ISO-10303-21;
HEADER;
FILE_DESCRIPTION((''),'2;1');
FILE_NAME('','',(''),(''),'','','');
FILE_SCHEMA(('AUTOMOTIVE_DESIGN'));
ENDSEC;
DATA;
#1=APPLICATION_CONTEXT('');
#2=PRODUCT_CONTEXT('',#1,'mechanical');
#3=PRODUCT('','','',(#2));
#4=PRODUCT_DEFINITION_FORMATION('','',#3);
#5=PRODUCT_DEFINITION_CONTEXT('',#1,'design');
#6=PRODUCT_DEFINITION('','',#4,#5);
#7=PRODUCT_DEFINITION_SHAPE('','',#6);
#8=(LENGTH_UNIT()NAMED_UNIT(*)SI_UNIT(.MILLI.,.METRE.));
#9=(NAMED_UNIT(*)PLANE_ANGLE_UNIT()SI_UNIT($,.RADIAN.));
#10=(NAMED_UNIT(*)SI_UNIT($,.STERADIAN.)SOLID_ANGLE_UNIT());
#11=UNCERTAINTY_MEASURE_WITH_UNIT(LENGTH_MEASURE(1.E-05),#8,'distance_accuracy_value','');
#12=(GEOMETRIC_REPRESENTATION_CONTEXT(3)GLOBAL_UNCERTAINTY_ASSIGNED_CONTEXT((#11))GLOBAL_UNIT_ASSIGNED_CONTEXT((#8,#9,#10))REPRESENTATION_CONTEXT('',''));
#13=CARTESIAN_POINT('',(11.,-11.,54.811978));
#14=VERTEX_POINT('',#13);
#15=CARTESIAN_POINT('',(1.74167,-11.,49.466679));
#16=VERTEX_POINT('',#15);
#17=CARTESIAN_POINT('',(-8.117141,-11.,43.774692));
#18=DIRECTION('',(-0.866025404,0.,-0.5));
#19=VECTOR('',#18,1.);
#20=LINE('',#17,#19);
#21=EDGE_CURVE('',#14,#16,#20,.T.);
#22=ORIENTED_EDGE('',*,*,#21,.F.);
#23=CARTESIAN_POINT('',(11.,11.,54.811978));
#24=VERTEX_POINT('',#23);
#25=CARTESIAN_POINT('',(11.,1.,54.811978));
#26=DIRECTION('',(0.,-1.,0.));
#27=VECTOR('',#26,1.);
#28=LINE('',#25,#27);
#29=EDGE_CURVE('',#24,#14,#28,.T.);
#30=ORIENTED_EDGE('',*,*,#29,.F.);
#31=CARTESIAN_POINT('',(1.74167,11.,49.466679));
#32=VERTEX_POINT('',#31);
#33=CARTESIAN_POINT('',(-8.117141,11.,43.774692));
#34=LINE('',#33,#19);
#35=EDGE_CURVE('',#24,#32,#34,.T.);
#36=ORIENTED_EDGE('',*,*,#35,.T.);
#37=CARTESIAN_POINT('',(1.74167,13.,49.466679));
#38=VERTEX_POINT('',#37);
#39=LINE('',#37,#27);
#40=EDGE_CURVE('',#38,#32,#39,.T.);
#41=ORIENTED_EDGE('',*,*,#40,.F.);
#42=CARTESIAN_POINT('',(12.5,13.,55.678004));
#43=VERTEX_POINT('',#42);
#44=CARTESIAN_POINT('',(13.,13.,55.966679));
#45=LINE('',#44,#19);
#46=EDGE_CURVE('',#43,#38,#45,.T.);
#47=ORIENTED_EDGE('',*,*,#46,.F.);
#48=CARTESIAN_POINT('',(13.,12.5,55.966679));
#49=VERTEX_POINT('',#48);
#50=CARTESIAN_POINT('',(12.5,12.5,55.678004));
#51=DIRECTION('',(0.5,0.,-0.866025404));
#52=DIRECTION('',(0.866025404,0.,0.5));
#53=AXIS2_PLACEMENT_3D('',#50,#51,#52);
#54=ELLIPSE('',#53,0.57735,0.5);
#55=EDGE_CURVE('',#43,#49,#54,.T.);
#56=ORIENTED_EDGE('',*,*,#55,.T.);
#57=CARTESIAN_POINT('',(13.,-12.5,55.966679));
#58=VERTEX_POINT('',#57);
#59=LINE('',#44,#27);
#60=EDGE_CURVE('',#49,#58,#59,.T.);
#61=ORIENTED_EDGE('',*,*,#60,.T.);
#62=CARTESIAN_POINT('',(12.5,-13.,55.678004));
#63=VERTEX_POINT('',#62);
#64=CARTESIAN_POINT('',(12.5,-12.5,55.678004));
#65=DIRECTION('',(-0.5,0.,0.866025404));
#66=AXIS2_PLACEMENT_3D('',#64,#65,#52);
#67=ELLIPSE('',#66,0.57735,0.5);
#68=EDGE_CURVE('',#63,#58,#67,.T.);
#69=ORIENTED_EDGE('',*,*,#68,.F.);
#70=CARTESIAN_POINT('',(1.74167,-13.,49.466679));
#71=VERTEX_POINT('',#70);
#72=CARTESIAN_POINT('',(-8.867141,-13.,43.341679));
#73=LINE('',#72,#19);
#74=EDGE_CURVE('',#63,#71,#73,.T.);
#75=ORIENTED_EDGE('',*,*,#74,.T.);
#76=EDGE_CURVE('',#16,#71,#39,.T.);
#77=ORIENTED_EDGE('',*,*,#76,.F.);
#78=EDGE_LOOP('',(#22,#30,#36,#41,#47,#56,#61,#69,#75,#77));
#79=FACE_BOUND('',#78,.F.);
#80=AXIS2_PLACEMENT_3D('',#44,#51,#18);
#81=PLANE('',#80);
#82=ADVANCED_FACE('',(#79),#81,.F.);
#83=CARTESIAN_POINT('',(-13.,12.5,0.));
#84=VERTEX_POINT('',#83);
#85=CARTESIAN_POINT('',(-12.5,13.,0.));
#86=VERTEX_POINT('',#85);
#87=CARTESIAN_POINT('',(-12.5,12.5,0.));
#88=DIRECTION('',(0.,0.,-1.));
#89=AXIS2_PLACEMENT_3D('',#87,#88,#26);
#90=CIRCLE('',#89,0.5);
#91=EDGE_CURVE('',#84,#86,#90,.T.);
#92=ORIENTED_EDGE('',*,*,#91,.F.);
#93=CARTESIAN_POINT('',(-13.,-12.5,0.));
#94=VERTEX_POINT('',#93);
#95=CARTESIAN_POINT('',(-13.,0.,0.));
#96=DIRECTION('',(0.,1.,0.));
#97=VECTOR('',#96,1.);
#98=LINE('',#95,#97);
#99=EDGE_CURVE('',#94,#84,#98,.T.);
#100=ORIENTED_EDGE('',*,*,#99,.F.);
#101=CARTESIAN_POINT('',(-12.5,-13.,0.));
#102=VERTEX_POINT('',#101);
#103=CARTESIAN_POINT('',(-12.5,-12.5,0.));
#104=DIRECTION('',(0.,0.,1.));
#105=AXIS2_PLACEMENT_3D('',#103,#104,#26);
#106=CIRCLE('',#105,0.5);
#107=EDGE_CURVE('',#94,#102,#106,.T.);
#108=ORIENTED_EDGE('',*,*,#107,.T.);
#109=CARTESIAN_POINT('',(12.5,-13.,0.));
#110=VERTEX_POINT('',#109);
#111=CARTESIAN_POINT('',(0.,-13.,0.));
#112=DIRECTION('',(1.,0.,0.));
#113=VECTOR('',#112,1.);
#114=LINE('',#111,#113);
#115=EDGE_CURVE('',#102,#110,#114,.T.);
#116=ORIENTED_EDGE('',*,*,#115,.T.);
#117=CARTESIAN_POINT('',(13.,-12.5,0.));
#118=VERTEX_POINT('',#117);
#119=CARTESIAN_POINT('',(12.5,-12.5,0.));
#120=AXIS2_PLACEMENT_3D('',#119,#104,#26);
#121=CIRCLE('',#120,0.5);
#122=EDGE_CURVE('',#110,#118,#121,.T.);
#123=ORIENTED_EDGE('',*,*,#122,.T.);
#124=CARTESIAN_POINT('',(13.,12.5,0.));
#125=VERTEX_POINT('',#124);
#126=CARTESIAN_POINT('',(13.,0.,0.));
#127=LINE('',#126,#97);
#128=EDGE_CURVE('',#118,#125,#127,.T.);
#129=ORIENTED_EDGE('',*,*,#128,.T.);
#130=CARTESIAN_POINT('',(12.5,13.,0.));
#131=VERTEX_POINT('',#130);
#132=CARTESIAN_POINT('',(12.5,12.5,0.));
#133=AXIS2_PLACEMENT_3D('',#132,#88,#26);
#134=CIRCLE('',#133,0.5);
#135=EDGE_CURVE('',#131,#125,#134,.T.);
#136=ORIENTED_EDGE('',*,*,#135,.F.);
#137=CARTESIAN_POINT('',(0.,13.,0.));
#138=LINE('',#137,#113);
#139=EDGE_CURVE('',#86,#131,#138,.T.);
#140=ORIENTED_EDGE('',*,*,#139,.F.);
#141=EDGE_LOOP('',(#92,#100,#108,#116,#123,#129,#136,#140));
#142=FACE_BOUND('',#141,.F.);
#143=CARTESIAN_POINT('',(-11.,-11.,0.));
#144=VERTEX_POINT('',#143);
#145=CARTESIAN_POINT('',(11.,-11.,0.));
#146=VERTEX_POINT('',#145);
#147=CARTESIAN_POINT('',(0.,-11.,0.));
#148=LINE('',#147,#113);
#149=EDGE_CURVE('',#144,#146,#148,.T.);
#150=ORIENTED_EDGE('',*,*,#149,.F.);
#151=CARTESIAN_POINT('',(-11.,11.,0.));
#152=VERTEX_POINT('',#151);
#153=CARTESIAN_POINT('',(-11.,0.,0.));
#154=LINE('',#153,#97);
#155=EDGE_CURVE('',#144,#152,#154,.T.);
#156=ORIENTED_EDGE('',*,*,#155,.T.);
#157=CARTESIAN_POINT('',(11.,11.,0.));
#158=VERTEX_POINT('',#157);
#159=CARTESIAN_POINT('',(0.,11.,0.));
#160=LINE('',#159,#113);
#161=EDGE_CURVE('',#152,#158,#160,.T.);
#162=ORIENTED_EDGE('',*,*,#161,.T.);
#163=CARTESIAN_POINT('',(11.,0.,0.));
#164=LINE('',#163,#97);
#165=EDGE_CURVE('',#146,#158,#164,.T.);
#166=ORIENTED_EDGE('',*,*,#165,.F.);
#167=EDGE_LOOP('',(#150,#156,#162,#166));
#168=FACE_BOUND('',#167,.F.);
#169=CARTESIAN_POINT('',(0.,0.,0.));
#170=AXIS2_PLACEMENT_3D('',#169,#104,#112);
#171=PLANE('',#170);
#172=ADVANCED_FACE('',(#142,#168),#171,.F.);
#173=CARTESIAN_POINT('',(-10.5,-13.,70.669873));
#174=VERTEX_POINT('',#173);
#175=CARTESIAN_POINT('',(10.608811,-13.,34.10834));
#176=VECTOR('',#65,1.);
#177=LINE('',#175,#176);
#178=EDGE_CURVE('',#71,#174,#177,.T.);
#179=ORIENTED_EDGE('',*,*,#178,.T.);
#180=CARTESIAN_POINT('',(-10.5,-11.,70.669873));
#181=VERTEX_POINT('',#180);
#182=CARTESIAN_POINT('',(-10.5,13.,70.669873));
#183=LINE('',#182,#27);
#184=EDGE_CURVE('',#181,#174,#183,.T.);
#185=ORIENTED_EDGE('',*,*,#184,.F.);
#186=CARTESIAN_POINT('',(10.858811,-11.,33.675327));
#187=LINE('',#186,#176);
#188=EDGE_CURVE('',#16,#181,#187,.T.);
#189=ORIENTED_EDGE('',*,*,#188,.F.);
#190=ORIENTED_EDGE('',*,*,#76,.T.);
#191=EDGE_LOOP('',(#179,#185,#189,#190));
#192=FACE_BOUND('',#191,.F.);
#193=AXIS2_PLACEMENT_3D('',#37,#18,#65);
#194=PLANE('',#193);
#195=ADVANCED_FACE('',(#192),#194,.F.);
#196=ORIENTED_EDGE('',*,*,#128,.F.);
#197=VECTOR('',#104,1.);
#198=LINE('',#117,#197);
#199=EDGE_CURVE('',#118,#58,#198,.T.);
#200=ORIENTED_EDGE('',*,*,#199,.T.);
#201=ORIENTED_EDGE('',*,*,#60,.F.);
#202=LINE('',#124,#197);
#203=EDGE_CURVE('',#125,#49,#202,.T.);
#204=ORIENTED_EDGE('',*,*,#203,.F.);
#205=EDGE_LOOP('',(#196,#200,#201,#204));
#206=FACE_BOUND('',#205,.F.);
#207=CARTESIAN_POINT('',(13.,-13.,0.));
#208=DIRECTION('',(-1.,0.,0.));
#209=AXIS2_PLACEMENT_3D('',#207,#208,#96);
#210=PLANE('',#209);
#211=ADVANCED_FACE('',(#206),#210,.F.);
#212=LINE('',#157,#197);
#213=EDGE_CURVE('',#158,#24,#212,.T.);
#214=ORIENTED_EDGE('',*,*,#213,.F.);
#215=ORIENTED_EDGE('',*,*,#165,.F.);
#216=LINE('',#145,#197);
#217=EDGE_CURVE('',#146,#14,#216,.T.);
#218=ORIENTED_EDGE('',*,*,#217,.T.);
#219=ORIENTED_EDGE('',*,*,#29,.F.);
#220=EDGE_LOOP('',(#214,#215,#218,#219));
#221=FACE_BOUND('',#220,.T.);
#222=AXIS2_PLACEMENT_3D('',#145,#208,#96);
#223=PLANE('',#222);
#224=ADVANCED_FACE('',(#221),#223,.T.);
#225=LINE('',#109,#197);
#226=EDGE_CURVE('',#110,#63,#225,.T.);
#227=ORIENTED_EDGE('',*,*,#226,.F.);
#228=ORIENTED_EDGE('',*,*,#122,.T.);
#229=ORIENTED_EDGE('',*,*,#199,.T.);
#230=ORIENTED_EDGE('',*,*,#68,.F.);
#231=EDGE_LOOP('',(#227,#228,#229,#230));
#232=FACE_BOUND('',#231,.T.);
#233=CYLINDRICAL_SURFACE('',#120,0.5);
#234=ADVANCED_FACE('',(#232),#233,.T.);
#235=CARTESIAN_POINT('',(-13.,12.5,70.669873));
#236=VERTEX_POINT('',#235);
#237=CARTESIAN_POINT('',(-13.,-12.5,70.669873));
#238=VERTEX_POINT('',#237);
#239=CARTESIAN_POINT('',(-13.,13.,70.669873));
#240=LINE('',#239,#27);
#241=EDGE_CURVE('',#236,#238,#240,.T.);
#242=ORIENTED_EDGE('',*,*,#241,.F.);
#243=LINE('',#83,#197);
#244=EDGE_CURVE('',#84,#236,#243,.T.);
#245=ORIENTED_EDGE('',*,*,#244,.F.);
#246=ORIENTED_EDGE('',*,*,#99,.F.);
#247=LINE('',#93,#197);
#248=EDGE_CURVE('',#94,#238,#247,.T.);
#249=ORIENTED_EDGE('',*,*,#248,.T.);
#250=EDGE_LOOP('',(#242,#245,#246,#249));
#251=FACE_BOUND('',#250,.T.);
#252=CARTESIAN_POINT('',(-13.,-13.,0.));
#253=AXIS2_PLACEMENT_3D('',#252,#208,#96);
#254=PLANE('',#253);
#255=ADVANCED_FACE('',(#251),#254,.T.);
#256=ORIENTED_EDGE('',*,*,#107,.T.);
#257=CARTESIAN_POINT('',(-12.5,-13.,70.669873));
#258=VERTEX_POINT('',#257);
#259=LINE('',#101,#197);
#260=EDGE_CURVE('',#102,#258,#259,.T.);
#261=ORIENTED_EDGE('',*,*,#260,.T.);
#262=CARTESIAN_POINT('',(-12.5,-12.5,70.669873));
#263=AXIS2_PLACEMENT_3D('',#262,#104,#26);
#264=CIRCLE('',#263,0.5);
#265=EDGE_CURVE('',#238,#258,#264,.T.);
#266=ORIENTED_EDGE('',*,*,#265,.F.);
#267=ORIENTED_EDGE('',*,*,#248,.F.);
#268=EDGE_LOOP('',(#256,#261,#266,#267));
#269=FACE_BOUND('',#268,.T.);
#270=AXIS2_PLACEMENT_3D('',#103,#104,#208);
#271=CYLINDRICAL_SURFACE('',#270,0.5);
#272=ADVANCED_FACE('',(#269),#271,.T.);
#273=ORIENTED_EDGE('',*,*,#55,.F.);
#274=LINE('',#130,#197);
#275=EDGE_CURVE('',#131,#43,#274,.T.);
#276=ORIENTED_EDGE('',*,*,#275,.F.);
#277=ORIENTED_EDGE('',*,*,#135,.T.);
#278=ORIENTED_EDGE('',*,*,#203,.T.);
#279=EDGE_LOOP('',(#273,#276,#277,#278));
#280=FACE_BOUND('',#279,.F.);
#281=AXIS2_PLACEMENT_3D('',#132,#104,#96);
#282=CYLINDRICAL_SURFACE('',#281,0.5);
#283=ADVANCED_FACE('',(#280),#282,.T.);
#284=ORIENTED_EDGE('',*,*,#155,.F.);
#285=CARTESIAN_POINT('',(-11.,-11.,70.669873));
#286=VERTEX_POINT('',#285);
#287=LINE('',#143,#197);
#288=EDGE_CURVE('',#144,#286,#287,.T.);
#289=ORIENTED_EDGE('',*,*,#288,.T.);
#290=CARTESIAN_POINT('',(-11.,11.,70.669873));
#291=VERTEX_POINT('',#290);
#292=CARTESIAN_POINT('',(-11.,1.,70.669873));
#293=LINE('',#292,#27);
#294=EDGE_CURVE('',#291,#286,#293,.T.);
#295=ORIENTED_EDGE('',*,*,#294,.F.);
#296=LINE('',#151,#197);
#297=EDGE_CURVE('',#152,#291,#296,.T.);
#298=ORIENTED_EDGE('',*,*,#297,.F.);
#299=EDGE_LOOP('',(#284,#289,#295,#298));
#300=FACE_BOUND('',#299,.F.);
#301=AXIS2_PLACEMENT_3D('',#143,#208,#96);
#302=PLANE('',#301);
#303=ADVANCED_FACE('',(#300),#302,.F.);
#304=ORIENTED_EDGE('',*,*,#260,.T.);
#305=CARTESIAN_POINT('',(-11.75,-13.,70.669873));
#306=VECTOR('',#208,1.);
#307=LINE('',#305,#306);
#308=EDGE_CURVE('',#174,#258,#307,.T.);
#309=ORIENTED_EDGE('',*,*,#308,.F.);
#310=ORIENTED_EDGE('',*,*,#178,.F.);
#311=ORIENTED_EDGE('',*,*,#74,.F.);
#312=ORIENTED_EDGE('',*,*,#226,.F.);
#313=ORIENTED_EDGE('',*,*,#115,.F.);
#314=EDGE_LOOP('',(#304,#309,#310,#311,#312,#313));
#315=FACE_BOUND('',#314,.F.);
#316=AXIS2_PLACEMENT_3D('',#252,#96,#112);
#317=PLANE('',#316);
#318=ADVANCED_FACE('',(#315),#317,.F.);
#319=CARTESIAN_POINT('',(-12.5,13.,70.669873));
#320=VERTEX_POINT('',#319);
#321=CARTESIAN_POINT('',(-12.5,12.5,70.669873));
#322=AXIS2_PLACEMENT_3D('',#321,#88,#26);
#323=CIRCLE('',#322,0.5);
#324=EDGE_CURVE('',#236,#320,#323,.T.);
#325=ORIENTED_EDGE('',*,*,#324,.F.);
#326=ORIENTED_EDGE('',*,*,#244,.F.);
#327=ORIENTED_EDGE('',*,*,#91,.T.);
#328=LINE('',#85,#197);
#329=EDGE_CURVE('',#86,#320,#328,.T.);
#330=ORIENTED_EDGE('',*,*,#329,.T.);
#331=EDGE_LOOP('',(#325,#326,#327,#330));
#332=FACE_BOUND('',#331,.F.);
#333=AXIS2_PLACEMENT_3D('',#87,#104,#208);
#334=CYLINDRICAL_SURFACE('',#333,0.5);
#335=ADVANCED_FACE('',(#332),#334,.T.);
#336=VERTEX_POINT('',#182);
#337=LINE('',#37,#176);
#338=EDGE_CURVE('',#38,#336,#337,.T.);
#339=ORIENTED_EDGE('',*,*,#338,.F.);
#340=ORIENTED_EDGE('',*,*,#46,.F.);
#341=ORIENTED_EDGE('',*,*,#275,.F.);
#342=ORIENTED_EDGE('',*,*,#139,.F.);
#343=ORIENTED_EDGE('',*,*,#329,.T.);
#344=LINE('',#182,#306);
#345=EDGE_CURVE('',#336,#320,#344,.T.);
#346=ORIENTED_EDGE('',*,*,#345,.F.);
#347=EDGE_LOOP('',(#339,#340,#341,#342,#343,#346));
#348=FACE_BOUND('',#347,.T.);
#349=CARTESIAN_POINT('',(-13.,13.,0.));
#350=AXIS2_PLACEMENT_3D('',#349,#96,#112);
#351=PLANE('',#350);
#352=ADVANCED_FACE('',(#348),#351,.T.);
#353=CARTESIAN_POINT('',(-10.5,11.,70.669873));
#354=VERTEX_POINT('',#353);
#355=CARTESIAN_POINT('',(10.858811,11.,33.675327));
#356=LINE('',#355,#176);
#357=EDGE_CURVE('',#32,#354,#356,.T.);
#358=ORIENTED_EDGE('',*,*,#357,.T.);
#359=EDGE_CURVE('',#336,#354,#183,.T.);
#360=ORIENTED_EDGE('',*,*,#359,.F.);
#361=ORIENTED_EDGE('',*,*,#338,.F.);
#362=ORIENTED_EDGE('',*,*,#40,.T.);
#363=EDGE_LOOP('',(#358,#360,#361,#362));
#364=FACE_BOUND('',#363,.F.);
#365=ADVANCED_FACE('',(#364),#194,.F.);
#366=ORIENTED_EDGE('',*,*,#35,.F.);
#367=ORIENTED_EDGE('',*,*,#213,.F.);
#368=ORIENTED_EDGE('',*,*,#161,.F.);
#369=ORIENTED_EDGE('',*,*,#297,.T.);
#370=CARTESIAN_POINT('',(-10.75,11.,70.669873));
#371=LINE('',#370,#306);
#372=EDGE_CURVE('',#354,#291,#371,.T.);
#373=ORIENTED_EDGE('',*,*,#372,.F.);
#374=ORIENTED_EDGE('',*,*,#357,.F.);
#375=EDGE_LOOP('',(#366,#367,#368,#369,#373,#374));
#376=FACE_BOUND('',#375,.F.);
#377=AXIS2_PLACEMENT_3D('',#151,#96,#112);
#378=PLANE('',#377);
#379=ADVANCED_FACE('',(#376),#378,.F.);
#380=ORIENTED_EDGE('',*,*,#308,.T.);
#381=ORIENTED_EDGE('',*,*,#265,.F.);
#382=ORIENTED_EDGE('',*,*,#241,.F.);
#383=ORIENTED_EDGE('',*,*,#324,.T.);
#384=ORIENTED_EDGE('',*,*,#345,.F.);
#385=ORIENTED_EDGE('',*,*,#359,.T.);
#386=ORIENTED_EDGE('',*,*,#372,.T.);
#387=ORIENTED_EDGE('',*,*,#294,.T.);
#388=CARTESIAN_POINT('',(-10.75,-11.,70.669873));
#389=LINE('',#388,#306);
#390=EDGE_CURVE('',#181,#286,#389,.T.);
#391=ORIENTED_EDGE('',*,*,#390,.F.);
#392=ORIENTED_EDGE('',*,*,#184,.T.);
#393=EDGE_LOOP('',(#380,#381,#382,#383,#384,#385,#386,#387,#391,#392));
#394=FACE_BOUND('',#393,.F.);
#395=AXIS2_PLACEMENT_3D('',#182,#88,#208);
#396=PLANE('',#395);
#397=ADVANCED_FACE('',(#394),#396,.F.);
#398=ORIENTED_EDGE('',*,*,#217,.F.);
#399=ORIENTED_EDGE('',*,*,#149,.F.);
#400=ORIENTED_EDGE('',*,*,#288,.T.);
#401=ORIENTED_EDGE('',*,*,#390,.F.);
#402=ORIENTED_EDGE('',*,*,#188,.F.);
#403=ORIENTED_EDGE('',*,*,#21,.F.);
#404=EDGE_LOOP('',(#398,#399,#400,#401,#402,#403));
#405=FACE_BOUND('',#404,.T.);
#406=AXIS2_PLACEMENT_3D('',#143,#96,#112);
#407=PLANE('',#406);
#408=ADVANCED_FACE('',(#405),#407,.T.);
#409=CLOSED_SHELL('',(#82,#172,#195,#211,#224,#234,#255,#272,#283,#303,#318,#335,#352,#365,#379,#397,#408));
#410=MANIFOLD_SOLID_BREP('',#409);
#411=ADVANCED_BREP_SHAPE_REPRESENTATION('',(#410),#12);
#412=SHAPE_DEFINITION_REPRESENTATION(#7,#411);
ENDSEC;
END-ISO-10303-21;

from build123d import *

# Parameters (mm, degrees)
F0_W     = 26
F0_H     = 26
F0_W_2   = 22
F0_H_2   = 22
F1_DEPTH = 75
F3_DEPTH = 26.001
F4_R     = 0.5


# Not quite as in the source:
# - a feature names something its author has since deleted; it is built from what else it names


with BuildPart() as f1:
    # F0 (on Top) → F1 (new body)
    with BuildSketch(Plane.XY):
        Rectangle(F0_W, F0_H)
        Rectangle(F0_W_2, F0_H_2, mode=Mode.SUBTRACT)
    extrude(amount=F1_DEPTH)

    # F2 (on face) → F3 (cut, through all)
    with BuildSketch(Plane(origin=(0, 13, 0), x_dir=(-1, 0, 0), z_dir=(0, 1, 0))):
        Polygon((-13, 55.9666790032), (-1.7416697508, 49.4666790032), (10.5, 70.6698729811), (13, 70.6698729811), (13, 75), (-8.7376814767, 75), (-13, 75), align=None)
    extrude(amount=-F3_DEPTH, mode=Mode.SUBTRACT)

    # F4
    f4_edges = [f1.edges().sort_by_distance(p)[0] for p in [
        (13, 13, 27.98334),
        (-13, 13, 35.334936),
        (-13, -13, 35.334936),
        (13, -13, 27.98334),
    ]]
    fillet(f4_edges, radius=F4_R)


solid = f1.part
